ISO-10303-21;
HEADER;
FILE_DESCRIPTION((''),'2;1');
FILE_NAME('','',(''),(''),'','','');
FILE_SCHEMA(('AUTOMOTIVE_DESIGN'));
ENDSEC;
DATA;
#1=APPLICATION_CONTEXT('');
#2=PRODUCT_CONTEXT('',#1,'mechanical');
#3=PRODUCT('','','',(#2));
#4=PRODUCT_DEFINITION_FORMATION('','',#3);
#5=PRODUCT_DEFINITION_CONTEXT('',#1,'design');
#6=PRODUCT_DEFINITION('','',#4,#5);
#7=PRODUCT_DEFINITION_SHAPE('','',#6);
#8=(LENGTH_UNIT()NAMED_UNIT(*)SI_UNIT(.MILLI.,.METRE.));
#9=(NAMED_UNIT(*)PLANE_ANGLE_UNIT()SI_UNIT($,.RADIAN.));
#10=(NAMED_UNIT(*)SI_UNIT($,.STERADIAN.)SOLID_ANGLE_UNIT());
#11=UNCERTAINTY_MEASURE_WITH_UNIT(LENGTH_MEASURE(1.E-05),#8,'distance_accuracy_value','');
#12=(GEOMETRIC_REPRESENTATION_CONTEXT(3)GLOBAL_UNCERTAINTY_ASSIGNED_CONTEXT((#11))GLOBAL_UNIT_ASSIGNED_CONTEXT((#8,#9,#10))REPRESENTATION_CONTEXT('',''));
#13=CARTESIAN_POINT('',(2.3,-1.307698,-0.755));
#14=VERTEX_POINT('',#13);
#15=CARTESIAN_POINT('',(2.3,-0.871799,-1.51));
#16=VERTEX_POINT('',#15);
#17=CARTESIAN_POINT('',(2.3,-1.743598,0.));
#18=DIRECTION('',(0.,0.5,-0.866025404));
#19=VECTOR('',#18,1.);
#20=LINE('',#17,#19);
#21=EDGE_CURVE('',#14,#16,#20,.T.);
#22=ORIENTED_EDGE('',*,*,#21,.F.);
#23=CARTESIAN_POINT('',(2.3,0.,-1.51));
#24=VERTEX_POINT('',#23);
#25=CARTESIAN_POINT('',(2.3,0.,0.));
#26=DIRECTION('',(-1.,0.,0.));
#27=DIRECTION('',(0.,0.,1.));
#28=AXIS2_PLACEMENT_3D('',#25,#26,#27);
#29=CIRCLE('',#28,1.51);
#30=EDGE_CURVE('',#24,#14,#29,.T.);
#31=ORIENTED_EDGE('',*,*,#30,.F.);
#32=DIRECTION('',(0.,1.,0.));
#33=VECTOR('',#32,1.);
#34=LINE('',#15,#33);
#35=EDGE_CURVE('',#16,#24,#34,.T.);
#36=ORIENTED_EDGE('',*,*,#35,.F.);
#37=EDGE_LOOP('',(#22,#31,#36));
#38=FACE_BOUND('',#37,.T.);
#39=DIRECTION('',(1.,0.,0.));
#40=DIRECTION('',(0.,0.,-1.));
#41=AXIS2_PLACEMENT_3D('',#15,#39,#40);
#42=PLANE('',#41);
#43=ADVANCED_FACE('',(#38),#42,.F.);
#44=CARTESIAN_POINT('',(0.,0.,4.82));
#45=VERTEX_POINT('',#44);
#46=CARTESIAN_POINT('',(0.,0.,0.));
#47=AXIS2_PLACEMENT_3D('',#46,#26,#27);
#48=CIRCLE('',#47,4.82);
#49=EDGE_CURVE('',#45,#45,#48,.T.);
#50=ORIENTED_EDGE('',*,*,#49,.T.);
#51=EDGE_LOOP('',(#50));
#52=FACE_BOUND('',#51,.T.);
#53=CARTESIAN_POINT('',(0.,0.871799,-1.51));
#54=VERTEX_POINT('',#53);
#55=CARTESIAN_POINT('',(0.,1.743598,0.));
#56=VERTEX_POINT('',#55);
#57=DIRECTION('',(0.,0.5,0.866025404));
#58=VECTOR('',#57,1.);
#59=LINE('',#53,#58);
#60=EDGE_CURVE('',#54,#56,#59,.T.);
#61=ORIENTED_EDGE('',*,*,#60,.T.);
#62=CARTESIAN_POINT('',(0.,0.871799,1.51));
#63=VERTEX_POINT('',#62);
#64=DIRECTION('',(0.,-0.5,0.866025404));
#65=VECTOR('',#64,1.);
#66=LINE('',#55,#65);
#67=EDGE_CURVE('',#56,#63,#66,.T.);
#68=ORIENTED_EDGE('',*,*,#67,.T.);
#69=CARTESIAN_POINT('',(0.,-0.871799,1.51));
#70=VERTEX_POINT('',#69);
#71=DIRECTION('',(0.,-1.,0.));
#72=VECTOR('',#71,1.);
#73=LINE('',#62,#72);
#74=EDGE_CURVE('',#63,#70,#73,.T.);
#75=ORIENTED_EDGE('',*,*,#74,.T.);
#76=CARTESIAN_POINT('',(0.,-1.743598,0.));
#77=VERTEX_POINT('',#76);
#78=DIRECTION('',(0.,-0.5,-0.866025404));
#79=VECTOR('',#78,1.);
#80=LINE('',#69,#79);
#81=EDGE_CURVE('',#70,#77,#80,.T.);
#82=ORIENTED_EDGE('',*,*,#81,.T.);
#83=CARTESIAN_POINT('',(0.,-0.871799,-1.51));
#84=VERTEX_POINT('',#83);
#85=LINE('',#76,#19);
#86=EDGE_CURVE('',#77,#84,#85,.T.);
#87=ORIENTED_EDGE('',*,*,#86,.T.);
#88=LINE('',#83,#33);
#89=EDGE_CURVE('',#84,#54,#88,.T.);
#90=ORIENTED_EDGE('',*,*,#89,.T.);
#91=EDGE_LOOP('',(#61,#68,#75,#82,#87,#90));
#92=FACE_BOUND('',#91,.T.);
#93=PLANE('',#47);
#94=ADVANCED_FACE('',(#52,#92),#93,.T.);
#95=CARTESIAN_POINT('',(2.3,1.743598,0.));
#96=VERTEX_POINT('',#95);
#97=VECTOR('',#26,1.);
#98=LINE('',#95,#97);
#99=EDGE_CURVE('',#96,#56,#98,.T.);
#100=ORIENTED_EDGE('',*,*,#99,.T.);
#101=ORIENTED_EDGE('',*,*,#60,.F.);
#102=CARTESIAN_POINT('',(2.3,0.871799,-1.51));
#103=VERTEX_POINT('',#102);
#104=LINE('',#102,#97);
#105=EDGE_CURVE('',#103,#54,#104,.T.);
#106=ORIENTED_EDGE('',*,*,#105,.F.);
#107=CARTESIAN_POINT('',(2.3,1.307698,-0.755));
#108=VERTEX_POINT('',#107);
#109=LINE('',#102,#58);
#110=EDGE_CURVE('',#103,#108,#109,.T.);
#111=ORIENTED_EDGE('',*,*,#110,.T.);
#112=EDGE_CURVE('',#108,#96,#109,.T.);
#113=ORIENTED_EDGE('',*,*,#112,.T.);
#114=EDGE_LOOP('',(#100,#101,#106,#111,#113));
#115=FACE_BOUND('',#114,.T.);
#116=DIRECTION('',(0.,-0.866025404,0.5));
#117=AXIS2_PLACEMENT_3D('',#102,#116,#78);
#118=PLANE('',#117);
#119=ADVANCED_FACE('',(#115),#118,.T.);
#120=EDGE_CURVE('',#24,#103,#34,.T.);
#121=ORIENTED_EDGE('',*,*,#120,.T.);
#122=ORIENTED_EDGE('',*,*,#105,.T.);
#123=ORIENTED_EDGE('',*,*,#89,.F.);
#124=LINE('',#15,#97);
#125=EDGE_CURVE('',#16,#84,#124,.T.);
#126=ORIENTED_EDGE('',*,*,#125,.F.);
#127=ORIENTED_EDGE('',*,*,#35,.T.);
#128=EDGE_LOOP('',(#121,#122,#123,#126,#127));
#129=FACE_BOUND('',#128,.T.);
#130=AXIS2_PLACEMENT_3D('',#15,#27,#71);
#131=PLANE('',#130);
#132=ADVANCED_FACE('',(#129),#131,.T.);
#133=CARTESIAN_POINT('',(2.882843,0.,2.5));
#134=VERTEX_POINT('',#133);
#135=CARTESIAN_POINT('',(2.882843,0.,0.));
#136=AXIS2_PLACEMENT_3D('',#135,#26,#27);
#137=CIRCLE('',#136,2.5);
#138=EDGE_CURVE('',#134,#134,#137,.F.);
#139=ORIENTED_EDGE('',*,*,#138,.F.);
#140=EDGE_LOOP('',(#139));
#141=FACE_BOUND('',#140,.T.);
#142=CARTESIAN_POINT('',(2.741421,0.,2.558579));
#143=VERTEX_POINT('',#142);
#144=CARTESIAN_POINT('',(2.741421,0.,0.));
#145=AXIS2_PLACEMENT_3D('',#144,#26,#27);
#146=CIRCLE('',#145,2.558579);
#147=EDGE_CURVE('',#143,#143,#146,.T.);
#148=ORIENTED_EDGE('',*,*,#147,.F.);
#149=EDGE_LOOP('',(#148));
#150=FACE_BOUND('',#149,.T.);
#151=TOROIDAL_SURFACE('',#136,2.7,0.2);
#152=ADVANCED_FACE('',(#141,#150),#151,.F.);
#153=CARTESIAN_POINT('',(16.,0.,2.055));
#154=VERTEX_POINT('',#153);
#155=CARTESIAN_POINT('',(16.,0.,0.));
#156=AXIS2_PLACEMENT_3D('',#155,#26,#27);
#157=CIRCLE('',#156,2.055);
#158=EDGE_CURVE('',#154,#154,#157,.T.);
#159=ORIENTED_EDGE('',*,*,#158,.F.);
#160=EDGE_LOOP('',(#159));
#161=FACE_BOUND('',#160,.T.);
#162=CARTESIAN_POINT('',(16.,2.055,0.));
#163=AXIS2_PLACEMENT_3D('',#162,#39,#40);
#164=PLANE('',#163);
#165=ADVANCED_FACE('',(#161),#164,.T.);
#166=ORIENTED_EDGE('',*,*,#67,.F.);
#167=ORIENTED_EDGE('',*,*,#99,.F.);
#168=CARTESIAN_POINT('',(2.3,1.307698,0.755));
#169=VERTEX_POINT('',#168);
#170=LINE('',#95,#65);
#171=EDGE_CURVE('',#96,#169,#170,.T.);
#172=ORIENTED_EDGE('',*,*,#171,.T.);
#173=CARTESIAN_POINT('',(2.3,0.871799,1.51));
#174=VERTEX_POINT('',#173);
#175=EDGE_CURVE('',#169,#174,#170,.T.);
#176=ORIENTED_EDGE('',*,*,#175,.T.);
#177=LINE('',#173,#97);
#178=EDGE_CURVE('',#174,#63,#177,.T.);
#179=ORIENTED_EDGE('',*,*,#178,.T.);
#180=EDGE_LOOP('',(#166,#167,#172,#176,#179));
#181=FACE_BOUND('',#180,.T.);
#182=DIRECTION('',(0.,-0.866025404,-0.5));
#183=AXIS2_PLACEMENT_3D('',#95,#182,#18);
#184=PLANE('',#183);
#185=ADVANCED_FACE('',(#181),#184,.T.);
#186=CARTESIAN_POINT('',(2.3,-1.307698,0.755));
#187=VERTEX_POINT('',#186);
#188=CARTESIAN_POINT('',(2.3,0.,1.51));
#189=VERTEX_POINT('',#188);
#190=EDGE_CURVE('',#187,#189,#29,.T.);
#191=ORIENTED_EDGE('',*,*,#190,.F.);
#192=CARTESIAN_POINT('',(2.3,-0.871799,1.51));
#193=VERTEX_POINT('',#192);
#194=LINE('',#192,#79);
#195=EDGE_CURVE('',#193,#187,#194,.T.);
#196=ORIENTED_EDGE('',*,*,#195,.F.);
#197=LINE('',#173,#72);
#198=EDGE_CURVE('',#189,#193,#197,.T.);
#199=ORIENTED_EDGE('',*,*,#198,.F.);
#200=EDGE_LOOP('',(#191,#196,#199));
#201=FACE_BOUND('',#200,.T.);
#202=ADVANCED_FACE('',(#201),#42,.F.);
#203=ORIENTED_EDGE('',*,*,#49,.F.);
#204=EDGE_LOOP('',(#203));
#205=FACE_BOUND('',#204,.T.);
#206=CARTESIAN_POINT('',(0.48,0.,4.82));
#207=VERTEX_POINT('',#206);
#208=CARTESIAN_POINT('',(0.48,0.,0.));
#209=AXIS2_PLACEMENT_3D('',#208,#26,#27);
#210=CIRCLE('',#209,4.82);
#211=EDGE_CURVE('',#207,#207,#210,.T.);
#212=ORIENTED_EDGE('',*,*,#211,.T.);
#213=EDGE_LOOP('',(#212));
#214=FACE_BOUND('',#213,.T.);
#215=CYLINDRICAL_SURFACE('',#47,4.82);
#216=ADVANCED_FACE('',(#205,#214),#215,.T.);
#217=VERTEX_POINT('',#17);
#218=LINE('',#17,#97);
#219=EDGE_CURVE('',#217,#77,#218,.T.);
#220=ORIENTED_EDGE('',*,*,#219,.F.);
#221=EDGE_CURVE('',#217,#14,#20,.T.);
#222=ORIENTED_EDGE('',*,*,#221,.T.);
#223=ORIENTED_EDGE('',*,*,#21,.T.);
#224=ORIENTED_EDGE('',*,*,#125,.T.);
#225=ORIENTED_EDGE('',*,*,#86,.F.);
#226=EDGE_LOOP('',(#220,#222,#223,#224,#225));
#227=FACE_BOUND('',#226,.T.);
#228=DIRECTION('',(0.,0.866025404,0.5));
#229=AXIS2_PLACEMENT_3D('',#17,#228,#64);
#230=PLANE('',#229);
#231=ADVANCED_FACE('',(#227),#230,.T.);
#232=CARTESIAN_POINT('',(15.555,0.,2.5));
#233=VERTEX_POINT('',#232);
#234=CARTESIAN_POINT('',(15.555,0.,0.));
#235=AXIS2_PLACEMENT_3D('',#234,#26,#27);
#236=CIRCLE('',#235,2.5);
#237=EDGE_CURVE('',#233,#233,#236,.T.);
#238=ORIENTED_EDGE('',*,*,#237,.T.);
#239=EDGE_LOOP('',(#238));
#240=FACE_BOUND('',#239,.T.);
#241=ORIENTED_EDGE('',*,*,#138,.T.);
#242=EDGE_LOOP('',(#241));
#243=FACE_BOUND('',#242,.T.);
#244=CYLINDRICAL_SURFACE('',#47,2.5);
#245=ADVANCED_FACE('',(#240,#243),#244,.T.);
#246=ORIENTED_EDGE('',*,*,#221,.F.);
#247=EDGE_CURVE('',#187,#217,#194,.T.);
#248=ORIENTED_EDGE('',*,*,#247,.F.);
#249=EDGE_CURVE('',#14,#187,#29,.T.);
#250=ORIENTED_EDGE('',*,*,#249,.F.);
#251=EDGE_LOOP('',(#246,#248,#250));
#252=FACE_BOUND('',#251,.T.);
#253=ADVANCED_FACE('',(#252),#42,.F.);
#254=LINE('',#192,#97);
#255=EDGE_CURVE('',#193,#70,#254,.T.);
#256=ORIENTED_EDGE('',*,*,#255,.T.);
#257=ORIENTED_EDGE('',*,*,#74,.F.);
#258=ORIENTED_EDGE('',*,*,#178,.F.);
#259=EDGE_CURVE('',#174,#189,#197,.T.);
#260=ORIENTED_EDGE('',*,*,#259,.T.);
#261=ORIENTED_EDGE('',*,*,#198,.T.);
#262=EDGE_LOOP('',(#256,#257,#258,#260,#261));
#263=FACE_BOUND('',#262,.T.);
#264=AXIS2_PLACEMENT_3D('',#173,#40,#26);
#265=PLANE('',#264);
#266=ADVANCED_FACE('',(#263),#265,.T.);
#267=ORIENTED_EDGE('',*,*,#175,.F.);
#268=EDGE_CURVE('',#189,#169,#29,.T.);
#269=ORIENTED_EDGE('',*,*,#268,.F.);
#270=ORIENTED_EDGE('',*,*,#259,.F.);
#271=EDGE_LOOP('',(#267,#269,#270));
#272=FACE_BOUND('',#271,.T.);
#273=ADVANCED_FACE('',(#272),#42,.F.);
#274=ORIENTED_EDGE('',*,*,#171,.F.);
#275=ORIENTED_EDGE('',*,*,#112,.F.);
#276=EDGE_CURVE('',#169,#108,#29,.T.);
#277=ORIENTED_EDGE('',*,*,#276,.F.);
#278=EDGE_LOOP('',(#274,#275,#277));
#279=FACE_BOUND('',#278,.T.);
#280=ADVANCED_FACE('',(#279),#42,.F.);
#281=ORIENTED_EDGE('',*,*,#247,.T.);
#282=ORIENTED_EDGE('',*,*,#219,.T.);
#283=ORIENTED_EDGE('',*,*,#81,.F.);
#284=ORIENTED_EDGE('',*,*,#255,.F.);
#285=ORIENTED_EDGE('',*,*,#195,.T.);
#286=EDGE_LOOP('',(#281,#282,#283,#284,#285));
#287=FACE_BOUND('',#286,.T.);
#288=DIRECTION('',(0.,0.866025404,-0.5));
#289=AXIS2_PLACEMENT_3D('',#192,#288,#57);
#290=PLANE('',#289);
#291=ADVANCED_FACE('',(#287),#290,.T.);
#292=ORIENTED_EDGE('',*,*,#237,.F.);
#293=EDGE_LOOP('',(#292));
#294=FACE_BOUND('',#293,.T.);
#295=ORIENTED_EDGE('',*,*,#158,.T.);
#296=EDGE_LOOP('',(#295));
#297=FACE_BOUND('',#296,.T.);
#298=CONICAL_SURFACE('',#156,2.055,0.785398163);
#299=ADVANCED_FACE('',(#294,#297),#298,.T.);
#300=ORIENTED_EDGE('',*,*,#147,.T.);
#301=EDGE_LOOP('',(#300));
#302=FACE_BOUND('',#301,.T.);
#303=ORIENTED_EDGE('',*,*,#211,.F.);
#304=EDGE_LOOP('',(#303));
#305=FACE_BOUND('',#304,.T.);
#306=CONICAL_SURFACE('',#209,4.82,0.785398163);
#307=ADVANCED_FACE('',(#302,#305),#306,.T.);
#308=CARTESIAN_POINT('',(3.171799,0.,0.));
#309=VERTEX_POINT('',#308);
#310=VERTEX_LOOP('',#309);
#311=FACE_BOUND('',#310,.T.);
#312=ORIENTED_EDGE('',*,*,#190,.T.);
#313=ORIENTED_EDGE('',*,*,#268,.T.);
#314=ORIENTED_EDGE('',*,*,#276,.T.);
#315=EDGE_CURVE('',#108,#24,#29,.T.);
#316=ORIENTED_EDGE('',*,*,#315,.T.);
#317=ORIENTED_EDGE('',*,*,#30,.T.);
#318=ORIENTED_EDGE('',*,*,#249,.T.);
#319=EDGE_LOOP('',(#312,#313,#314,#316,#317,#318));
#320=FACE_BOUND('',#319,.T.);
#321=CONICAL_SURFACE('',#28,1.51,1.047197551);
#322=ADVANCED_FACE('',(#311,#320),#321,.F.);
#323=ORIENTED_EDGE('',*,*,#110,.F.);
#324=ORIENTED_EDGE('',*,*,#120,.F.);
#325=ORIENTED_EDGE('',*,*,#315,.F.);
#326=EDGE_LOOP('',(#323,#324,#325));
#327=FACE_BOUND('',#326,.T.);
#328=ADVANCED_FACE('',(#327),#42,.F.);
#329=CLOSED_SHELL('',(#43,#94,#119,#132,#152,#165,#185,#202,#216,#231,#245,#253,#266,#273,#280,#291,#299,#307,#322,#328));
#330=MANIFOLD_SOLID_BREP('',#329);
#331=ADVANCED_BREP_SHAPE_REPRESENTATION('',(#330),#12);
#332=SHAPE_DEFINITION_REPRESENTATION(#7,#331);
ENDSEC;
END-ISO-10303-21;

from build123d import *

# Parameters (mm, degrees)
FILLET1_R   = 0.2
HEX_START   = -2.3
HEX_2_DEPTH = 2.3


with BuildPart() as part:
    # BodySke → BaseBody (revolve)
    with BuildSketch(Plane.XY, mode=Mode.PRIVATE) as basebody_sk:
        Polygon((0, 0), (0, 4.82), (0.48, 4.82), (2.8, 2.5), (15.555, 2.5), (16, 2.055), (16, 0), align=None)
    revolve(basebody_sk.sketch.rotate(Axis((0, 0, 0), (1, 0, 0)), 90), axis=Axis((0, 0, 0), (1, 0, 0)))

    # Fillet1
    fillet1_edges = [part.edges().sort_by_distance(p)[0] for p in [
        (2.8, 0, -2.5),
    ]]
    fillet(fillet1_edges, radius=FILLET1_R)

    # Hex 2: read off the stored shape, not the designer's step
    # Hex 2 outline → Hex 2 (cut)
    with BuildSketch(Plane.ZY.offset(HEX_START)):
        Polygon((-1.51, -0.871798906), (0, -1.743597813), (1.51, -0.871798906), (1.51, 0.871798906), (0, 1.743597813), (-1.51, 0.871798906), align=None)
    extrude(amount=HEX_2_DEPTH, mode=Mode.SUBTRACT)

    # Hex 2 2 outline → Hex 2 2 (revolve, cut)
    with BuildSketch(Plane.YX):
        Polygon((1.51, 2.3), (0, 3.171798906), (0, 2.3), align=None)
    revolve(axis=Axis((0, 0, 0), (1, 0, 0)), mode=Mode.SUBTRACT)


solid = part.part
